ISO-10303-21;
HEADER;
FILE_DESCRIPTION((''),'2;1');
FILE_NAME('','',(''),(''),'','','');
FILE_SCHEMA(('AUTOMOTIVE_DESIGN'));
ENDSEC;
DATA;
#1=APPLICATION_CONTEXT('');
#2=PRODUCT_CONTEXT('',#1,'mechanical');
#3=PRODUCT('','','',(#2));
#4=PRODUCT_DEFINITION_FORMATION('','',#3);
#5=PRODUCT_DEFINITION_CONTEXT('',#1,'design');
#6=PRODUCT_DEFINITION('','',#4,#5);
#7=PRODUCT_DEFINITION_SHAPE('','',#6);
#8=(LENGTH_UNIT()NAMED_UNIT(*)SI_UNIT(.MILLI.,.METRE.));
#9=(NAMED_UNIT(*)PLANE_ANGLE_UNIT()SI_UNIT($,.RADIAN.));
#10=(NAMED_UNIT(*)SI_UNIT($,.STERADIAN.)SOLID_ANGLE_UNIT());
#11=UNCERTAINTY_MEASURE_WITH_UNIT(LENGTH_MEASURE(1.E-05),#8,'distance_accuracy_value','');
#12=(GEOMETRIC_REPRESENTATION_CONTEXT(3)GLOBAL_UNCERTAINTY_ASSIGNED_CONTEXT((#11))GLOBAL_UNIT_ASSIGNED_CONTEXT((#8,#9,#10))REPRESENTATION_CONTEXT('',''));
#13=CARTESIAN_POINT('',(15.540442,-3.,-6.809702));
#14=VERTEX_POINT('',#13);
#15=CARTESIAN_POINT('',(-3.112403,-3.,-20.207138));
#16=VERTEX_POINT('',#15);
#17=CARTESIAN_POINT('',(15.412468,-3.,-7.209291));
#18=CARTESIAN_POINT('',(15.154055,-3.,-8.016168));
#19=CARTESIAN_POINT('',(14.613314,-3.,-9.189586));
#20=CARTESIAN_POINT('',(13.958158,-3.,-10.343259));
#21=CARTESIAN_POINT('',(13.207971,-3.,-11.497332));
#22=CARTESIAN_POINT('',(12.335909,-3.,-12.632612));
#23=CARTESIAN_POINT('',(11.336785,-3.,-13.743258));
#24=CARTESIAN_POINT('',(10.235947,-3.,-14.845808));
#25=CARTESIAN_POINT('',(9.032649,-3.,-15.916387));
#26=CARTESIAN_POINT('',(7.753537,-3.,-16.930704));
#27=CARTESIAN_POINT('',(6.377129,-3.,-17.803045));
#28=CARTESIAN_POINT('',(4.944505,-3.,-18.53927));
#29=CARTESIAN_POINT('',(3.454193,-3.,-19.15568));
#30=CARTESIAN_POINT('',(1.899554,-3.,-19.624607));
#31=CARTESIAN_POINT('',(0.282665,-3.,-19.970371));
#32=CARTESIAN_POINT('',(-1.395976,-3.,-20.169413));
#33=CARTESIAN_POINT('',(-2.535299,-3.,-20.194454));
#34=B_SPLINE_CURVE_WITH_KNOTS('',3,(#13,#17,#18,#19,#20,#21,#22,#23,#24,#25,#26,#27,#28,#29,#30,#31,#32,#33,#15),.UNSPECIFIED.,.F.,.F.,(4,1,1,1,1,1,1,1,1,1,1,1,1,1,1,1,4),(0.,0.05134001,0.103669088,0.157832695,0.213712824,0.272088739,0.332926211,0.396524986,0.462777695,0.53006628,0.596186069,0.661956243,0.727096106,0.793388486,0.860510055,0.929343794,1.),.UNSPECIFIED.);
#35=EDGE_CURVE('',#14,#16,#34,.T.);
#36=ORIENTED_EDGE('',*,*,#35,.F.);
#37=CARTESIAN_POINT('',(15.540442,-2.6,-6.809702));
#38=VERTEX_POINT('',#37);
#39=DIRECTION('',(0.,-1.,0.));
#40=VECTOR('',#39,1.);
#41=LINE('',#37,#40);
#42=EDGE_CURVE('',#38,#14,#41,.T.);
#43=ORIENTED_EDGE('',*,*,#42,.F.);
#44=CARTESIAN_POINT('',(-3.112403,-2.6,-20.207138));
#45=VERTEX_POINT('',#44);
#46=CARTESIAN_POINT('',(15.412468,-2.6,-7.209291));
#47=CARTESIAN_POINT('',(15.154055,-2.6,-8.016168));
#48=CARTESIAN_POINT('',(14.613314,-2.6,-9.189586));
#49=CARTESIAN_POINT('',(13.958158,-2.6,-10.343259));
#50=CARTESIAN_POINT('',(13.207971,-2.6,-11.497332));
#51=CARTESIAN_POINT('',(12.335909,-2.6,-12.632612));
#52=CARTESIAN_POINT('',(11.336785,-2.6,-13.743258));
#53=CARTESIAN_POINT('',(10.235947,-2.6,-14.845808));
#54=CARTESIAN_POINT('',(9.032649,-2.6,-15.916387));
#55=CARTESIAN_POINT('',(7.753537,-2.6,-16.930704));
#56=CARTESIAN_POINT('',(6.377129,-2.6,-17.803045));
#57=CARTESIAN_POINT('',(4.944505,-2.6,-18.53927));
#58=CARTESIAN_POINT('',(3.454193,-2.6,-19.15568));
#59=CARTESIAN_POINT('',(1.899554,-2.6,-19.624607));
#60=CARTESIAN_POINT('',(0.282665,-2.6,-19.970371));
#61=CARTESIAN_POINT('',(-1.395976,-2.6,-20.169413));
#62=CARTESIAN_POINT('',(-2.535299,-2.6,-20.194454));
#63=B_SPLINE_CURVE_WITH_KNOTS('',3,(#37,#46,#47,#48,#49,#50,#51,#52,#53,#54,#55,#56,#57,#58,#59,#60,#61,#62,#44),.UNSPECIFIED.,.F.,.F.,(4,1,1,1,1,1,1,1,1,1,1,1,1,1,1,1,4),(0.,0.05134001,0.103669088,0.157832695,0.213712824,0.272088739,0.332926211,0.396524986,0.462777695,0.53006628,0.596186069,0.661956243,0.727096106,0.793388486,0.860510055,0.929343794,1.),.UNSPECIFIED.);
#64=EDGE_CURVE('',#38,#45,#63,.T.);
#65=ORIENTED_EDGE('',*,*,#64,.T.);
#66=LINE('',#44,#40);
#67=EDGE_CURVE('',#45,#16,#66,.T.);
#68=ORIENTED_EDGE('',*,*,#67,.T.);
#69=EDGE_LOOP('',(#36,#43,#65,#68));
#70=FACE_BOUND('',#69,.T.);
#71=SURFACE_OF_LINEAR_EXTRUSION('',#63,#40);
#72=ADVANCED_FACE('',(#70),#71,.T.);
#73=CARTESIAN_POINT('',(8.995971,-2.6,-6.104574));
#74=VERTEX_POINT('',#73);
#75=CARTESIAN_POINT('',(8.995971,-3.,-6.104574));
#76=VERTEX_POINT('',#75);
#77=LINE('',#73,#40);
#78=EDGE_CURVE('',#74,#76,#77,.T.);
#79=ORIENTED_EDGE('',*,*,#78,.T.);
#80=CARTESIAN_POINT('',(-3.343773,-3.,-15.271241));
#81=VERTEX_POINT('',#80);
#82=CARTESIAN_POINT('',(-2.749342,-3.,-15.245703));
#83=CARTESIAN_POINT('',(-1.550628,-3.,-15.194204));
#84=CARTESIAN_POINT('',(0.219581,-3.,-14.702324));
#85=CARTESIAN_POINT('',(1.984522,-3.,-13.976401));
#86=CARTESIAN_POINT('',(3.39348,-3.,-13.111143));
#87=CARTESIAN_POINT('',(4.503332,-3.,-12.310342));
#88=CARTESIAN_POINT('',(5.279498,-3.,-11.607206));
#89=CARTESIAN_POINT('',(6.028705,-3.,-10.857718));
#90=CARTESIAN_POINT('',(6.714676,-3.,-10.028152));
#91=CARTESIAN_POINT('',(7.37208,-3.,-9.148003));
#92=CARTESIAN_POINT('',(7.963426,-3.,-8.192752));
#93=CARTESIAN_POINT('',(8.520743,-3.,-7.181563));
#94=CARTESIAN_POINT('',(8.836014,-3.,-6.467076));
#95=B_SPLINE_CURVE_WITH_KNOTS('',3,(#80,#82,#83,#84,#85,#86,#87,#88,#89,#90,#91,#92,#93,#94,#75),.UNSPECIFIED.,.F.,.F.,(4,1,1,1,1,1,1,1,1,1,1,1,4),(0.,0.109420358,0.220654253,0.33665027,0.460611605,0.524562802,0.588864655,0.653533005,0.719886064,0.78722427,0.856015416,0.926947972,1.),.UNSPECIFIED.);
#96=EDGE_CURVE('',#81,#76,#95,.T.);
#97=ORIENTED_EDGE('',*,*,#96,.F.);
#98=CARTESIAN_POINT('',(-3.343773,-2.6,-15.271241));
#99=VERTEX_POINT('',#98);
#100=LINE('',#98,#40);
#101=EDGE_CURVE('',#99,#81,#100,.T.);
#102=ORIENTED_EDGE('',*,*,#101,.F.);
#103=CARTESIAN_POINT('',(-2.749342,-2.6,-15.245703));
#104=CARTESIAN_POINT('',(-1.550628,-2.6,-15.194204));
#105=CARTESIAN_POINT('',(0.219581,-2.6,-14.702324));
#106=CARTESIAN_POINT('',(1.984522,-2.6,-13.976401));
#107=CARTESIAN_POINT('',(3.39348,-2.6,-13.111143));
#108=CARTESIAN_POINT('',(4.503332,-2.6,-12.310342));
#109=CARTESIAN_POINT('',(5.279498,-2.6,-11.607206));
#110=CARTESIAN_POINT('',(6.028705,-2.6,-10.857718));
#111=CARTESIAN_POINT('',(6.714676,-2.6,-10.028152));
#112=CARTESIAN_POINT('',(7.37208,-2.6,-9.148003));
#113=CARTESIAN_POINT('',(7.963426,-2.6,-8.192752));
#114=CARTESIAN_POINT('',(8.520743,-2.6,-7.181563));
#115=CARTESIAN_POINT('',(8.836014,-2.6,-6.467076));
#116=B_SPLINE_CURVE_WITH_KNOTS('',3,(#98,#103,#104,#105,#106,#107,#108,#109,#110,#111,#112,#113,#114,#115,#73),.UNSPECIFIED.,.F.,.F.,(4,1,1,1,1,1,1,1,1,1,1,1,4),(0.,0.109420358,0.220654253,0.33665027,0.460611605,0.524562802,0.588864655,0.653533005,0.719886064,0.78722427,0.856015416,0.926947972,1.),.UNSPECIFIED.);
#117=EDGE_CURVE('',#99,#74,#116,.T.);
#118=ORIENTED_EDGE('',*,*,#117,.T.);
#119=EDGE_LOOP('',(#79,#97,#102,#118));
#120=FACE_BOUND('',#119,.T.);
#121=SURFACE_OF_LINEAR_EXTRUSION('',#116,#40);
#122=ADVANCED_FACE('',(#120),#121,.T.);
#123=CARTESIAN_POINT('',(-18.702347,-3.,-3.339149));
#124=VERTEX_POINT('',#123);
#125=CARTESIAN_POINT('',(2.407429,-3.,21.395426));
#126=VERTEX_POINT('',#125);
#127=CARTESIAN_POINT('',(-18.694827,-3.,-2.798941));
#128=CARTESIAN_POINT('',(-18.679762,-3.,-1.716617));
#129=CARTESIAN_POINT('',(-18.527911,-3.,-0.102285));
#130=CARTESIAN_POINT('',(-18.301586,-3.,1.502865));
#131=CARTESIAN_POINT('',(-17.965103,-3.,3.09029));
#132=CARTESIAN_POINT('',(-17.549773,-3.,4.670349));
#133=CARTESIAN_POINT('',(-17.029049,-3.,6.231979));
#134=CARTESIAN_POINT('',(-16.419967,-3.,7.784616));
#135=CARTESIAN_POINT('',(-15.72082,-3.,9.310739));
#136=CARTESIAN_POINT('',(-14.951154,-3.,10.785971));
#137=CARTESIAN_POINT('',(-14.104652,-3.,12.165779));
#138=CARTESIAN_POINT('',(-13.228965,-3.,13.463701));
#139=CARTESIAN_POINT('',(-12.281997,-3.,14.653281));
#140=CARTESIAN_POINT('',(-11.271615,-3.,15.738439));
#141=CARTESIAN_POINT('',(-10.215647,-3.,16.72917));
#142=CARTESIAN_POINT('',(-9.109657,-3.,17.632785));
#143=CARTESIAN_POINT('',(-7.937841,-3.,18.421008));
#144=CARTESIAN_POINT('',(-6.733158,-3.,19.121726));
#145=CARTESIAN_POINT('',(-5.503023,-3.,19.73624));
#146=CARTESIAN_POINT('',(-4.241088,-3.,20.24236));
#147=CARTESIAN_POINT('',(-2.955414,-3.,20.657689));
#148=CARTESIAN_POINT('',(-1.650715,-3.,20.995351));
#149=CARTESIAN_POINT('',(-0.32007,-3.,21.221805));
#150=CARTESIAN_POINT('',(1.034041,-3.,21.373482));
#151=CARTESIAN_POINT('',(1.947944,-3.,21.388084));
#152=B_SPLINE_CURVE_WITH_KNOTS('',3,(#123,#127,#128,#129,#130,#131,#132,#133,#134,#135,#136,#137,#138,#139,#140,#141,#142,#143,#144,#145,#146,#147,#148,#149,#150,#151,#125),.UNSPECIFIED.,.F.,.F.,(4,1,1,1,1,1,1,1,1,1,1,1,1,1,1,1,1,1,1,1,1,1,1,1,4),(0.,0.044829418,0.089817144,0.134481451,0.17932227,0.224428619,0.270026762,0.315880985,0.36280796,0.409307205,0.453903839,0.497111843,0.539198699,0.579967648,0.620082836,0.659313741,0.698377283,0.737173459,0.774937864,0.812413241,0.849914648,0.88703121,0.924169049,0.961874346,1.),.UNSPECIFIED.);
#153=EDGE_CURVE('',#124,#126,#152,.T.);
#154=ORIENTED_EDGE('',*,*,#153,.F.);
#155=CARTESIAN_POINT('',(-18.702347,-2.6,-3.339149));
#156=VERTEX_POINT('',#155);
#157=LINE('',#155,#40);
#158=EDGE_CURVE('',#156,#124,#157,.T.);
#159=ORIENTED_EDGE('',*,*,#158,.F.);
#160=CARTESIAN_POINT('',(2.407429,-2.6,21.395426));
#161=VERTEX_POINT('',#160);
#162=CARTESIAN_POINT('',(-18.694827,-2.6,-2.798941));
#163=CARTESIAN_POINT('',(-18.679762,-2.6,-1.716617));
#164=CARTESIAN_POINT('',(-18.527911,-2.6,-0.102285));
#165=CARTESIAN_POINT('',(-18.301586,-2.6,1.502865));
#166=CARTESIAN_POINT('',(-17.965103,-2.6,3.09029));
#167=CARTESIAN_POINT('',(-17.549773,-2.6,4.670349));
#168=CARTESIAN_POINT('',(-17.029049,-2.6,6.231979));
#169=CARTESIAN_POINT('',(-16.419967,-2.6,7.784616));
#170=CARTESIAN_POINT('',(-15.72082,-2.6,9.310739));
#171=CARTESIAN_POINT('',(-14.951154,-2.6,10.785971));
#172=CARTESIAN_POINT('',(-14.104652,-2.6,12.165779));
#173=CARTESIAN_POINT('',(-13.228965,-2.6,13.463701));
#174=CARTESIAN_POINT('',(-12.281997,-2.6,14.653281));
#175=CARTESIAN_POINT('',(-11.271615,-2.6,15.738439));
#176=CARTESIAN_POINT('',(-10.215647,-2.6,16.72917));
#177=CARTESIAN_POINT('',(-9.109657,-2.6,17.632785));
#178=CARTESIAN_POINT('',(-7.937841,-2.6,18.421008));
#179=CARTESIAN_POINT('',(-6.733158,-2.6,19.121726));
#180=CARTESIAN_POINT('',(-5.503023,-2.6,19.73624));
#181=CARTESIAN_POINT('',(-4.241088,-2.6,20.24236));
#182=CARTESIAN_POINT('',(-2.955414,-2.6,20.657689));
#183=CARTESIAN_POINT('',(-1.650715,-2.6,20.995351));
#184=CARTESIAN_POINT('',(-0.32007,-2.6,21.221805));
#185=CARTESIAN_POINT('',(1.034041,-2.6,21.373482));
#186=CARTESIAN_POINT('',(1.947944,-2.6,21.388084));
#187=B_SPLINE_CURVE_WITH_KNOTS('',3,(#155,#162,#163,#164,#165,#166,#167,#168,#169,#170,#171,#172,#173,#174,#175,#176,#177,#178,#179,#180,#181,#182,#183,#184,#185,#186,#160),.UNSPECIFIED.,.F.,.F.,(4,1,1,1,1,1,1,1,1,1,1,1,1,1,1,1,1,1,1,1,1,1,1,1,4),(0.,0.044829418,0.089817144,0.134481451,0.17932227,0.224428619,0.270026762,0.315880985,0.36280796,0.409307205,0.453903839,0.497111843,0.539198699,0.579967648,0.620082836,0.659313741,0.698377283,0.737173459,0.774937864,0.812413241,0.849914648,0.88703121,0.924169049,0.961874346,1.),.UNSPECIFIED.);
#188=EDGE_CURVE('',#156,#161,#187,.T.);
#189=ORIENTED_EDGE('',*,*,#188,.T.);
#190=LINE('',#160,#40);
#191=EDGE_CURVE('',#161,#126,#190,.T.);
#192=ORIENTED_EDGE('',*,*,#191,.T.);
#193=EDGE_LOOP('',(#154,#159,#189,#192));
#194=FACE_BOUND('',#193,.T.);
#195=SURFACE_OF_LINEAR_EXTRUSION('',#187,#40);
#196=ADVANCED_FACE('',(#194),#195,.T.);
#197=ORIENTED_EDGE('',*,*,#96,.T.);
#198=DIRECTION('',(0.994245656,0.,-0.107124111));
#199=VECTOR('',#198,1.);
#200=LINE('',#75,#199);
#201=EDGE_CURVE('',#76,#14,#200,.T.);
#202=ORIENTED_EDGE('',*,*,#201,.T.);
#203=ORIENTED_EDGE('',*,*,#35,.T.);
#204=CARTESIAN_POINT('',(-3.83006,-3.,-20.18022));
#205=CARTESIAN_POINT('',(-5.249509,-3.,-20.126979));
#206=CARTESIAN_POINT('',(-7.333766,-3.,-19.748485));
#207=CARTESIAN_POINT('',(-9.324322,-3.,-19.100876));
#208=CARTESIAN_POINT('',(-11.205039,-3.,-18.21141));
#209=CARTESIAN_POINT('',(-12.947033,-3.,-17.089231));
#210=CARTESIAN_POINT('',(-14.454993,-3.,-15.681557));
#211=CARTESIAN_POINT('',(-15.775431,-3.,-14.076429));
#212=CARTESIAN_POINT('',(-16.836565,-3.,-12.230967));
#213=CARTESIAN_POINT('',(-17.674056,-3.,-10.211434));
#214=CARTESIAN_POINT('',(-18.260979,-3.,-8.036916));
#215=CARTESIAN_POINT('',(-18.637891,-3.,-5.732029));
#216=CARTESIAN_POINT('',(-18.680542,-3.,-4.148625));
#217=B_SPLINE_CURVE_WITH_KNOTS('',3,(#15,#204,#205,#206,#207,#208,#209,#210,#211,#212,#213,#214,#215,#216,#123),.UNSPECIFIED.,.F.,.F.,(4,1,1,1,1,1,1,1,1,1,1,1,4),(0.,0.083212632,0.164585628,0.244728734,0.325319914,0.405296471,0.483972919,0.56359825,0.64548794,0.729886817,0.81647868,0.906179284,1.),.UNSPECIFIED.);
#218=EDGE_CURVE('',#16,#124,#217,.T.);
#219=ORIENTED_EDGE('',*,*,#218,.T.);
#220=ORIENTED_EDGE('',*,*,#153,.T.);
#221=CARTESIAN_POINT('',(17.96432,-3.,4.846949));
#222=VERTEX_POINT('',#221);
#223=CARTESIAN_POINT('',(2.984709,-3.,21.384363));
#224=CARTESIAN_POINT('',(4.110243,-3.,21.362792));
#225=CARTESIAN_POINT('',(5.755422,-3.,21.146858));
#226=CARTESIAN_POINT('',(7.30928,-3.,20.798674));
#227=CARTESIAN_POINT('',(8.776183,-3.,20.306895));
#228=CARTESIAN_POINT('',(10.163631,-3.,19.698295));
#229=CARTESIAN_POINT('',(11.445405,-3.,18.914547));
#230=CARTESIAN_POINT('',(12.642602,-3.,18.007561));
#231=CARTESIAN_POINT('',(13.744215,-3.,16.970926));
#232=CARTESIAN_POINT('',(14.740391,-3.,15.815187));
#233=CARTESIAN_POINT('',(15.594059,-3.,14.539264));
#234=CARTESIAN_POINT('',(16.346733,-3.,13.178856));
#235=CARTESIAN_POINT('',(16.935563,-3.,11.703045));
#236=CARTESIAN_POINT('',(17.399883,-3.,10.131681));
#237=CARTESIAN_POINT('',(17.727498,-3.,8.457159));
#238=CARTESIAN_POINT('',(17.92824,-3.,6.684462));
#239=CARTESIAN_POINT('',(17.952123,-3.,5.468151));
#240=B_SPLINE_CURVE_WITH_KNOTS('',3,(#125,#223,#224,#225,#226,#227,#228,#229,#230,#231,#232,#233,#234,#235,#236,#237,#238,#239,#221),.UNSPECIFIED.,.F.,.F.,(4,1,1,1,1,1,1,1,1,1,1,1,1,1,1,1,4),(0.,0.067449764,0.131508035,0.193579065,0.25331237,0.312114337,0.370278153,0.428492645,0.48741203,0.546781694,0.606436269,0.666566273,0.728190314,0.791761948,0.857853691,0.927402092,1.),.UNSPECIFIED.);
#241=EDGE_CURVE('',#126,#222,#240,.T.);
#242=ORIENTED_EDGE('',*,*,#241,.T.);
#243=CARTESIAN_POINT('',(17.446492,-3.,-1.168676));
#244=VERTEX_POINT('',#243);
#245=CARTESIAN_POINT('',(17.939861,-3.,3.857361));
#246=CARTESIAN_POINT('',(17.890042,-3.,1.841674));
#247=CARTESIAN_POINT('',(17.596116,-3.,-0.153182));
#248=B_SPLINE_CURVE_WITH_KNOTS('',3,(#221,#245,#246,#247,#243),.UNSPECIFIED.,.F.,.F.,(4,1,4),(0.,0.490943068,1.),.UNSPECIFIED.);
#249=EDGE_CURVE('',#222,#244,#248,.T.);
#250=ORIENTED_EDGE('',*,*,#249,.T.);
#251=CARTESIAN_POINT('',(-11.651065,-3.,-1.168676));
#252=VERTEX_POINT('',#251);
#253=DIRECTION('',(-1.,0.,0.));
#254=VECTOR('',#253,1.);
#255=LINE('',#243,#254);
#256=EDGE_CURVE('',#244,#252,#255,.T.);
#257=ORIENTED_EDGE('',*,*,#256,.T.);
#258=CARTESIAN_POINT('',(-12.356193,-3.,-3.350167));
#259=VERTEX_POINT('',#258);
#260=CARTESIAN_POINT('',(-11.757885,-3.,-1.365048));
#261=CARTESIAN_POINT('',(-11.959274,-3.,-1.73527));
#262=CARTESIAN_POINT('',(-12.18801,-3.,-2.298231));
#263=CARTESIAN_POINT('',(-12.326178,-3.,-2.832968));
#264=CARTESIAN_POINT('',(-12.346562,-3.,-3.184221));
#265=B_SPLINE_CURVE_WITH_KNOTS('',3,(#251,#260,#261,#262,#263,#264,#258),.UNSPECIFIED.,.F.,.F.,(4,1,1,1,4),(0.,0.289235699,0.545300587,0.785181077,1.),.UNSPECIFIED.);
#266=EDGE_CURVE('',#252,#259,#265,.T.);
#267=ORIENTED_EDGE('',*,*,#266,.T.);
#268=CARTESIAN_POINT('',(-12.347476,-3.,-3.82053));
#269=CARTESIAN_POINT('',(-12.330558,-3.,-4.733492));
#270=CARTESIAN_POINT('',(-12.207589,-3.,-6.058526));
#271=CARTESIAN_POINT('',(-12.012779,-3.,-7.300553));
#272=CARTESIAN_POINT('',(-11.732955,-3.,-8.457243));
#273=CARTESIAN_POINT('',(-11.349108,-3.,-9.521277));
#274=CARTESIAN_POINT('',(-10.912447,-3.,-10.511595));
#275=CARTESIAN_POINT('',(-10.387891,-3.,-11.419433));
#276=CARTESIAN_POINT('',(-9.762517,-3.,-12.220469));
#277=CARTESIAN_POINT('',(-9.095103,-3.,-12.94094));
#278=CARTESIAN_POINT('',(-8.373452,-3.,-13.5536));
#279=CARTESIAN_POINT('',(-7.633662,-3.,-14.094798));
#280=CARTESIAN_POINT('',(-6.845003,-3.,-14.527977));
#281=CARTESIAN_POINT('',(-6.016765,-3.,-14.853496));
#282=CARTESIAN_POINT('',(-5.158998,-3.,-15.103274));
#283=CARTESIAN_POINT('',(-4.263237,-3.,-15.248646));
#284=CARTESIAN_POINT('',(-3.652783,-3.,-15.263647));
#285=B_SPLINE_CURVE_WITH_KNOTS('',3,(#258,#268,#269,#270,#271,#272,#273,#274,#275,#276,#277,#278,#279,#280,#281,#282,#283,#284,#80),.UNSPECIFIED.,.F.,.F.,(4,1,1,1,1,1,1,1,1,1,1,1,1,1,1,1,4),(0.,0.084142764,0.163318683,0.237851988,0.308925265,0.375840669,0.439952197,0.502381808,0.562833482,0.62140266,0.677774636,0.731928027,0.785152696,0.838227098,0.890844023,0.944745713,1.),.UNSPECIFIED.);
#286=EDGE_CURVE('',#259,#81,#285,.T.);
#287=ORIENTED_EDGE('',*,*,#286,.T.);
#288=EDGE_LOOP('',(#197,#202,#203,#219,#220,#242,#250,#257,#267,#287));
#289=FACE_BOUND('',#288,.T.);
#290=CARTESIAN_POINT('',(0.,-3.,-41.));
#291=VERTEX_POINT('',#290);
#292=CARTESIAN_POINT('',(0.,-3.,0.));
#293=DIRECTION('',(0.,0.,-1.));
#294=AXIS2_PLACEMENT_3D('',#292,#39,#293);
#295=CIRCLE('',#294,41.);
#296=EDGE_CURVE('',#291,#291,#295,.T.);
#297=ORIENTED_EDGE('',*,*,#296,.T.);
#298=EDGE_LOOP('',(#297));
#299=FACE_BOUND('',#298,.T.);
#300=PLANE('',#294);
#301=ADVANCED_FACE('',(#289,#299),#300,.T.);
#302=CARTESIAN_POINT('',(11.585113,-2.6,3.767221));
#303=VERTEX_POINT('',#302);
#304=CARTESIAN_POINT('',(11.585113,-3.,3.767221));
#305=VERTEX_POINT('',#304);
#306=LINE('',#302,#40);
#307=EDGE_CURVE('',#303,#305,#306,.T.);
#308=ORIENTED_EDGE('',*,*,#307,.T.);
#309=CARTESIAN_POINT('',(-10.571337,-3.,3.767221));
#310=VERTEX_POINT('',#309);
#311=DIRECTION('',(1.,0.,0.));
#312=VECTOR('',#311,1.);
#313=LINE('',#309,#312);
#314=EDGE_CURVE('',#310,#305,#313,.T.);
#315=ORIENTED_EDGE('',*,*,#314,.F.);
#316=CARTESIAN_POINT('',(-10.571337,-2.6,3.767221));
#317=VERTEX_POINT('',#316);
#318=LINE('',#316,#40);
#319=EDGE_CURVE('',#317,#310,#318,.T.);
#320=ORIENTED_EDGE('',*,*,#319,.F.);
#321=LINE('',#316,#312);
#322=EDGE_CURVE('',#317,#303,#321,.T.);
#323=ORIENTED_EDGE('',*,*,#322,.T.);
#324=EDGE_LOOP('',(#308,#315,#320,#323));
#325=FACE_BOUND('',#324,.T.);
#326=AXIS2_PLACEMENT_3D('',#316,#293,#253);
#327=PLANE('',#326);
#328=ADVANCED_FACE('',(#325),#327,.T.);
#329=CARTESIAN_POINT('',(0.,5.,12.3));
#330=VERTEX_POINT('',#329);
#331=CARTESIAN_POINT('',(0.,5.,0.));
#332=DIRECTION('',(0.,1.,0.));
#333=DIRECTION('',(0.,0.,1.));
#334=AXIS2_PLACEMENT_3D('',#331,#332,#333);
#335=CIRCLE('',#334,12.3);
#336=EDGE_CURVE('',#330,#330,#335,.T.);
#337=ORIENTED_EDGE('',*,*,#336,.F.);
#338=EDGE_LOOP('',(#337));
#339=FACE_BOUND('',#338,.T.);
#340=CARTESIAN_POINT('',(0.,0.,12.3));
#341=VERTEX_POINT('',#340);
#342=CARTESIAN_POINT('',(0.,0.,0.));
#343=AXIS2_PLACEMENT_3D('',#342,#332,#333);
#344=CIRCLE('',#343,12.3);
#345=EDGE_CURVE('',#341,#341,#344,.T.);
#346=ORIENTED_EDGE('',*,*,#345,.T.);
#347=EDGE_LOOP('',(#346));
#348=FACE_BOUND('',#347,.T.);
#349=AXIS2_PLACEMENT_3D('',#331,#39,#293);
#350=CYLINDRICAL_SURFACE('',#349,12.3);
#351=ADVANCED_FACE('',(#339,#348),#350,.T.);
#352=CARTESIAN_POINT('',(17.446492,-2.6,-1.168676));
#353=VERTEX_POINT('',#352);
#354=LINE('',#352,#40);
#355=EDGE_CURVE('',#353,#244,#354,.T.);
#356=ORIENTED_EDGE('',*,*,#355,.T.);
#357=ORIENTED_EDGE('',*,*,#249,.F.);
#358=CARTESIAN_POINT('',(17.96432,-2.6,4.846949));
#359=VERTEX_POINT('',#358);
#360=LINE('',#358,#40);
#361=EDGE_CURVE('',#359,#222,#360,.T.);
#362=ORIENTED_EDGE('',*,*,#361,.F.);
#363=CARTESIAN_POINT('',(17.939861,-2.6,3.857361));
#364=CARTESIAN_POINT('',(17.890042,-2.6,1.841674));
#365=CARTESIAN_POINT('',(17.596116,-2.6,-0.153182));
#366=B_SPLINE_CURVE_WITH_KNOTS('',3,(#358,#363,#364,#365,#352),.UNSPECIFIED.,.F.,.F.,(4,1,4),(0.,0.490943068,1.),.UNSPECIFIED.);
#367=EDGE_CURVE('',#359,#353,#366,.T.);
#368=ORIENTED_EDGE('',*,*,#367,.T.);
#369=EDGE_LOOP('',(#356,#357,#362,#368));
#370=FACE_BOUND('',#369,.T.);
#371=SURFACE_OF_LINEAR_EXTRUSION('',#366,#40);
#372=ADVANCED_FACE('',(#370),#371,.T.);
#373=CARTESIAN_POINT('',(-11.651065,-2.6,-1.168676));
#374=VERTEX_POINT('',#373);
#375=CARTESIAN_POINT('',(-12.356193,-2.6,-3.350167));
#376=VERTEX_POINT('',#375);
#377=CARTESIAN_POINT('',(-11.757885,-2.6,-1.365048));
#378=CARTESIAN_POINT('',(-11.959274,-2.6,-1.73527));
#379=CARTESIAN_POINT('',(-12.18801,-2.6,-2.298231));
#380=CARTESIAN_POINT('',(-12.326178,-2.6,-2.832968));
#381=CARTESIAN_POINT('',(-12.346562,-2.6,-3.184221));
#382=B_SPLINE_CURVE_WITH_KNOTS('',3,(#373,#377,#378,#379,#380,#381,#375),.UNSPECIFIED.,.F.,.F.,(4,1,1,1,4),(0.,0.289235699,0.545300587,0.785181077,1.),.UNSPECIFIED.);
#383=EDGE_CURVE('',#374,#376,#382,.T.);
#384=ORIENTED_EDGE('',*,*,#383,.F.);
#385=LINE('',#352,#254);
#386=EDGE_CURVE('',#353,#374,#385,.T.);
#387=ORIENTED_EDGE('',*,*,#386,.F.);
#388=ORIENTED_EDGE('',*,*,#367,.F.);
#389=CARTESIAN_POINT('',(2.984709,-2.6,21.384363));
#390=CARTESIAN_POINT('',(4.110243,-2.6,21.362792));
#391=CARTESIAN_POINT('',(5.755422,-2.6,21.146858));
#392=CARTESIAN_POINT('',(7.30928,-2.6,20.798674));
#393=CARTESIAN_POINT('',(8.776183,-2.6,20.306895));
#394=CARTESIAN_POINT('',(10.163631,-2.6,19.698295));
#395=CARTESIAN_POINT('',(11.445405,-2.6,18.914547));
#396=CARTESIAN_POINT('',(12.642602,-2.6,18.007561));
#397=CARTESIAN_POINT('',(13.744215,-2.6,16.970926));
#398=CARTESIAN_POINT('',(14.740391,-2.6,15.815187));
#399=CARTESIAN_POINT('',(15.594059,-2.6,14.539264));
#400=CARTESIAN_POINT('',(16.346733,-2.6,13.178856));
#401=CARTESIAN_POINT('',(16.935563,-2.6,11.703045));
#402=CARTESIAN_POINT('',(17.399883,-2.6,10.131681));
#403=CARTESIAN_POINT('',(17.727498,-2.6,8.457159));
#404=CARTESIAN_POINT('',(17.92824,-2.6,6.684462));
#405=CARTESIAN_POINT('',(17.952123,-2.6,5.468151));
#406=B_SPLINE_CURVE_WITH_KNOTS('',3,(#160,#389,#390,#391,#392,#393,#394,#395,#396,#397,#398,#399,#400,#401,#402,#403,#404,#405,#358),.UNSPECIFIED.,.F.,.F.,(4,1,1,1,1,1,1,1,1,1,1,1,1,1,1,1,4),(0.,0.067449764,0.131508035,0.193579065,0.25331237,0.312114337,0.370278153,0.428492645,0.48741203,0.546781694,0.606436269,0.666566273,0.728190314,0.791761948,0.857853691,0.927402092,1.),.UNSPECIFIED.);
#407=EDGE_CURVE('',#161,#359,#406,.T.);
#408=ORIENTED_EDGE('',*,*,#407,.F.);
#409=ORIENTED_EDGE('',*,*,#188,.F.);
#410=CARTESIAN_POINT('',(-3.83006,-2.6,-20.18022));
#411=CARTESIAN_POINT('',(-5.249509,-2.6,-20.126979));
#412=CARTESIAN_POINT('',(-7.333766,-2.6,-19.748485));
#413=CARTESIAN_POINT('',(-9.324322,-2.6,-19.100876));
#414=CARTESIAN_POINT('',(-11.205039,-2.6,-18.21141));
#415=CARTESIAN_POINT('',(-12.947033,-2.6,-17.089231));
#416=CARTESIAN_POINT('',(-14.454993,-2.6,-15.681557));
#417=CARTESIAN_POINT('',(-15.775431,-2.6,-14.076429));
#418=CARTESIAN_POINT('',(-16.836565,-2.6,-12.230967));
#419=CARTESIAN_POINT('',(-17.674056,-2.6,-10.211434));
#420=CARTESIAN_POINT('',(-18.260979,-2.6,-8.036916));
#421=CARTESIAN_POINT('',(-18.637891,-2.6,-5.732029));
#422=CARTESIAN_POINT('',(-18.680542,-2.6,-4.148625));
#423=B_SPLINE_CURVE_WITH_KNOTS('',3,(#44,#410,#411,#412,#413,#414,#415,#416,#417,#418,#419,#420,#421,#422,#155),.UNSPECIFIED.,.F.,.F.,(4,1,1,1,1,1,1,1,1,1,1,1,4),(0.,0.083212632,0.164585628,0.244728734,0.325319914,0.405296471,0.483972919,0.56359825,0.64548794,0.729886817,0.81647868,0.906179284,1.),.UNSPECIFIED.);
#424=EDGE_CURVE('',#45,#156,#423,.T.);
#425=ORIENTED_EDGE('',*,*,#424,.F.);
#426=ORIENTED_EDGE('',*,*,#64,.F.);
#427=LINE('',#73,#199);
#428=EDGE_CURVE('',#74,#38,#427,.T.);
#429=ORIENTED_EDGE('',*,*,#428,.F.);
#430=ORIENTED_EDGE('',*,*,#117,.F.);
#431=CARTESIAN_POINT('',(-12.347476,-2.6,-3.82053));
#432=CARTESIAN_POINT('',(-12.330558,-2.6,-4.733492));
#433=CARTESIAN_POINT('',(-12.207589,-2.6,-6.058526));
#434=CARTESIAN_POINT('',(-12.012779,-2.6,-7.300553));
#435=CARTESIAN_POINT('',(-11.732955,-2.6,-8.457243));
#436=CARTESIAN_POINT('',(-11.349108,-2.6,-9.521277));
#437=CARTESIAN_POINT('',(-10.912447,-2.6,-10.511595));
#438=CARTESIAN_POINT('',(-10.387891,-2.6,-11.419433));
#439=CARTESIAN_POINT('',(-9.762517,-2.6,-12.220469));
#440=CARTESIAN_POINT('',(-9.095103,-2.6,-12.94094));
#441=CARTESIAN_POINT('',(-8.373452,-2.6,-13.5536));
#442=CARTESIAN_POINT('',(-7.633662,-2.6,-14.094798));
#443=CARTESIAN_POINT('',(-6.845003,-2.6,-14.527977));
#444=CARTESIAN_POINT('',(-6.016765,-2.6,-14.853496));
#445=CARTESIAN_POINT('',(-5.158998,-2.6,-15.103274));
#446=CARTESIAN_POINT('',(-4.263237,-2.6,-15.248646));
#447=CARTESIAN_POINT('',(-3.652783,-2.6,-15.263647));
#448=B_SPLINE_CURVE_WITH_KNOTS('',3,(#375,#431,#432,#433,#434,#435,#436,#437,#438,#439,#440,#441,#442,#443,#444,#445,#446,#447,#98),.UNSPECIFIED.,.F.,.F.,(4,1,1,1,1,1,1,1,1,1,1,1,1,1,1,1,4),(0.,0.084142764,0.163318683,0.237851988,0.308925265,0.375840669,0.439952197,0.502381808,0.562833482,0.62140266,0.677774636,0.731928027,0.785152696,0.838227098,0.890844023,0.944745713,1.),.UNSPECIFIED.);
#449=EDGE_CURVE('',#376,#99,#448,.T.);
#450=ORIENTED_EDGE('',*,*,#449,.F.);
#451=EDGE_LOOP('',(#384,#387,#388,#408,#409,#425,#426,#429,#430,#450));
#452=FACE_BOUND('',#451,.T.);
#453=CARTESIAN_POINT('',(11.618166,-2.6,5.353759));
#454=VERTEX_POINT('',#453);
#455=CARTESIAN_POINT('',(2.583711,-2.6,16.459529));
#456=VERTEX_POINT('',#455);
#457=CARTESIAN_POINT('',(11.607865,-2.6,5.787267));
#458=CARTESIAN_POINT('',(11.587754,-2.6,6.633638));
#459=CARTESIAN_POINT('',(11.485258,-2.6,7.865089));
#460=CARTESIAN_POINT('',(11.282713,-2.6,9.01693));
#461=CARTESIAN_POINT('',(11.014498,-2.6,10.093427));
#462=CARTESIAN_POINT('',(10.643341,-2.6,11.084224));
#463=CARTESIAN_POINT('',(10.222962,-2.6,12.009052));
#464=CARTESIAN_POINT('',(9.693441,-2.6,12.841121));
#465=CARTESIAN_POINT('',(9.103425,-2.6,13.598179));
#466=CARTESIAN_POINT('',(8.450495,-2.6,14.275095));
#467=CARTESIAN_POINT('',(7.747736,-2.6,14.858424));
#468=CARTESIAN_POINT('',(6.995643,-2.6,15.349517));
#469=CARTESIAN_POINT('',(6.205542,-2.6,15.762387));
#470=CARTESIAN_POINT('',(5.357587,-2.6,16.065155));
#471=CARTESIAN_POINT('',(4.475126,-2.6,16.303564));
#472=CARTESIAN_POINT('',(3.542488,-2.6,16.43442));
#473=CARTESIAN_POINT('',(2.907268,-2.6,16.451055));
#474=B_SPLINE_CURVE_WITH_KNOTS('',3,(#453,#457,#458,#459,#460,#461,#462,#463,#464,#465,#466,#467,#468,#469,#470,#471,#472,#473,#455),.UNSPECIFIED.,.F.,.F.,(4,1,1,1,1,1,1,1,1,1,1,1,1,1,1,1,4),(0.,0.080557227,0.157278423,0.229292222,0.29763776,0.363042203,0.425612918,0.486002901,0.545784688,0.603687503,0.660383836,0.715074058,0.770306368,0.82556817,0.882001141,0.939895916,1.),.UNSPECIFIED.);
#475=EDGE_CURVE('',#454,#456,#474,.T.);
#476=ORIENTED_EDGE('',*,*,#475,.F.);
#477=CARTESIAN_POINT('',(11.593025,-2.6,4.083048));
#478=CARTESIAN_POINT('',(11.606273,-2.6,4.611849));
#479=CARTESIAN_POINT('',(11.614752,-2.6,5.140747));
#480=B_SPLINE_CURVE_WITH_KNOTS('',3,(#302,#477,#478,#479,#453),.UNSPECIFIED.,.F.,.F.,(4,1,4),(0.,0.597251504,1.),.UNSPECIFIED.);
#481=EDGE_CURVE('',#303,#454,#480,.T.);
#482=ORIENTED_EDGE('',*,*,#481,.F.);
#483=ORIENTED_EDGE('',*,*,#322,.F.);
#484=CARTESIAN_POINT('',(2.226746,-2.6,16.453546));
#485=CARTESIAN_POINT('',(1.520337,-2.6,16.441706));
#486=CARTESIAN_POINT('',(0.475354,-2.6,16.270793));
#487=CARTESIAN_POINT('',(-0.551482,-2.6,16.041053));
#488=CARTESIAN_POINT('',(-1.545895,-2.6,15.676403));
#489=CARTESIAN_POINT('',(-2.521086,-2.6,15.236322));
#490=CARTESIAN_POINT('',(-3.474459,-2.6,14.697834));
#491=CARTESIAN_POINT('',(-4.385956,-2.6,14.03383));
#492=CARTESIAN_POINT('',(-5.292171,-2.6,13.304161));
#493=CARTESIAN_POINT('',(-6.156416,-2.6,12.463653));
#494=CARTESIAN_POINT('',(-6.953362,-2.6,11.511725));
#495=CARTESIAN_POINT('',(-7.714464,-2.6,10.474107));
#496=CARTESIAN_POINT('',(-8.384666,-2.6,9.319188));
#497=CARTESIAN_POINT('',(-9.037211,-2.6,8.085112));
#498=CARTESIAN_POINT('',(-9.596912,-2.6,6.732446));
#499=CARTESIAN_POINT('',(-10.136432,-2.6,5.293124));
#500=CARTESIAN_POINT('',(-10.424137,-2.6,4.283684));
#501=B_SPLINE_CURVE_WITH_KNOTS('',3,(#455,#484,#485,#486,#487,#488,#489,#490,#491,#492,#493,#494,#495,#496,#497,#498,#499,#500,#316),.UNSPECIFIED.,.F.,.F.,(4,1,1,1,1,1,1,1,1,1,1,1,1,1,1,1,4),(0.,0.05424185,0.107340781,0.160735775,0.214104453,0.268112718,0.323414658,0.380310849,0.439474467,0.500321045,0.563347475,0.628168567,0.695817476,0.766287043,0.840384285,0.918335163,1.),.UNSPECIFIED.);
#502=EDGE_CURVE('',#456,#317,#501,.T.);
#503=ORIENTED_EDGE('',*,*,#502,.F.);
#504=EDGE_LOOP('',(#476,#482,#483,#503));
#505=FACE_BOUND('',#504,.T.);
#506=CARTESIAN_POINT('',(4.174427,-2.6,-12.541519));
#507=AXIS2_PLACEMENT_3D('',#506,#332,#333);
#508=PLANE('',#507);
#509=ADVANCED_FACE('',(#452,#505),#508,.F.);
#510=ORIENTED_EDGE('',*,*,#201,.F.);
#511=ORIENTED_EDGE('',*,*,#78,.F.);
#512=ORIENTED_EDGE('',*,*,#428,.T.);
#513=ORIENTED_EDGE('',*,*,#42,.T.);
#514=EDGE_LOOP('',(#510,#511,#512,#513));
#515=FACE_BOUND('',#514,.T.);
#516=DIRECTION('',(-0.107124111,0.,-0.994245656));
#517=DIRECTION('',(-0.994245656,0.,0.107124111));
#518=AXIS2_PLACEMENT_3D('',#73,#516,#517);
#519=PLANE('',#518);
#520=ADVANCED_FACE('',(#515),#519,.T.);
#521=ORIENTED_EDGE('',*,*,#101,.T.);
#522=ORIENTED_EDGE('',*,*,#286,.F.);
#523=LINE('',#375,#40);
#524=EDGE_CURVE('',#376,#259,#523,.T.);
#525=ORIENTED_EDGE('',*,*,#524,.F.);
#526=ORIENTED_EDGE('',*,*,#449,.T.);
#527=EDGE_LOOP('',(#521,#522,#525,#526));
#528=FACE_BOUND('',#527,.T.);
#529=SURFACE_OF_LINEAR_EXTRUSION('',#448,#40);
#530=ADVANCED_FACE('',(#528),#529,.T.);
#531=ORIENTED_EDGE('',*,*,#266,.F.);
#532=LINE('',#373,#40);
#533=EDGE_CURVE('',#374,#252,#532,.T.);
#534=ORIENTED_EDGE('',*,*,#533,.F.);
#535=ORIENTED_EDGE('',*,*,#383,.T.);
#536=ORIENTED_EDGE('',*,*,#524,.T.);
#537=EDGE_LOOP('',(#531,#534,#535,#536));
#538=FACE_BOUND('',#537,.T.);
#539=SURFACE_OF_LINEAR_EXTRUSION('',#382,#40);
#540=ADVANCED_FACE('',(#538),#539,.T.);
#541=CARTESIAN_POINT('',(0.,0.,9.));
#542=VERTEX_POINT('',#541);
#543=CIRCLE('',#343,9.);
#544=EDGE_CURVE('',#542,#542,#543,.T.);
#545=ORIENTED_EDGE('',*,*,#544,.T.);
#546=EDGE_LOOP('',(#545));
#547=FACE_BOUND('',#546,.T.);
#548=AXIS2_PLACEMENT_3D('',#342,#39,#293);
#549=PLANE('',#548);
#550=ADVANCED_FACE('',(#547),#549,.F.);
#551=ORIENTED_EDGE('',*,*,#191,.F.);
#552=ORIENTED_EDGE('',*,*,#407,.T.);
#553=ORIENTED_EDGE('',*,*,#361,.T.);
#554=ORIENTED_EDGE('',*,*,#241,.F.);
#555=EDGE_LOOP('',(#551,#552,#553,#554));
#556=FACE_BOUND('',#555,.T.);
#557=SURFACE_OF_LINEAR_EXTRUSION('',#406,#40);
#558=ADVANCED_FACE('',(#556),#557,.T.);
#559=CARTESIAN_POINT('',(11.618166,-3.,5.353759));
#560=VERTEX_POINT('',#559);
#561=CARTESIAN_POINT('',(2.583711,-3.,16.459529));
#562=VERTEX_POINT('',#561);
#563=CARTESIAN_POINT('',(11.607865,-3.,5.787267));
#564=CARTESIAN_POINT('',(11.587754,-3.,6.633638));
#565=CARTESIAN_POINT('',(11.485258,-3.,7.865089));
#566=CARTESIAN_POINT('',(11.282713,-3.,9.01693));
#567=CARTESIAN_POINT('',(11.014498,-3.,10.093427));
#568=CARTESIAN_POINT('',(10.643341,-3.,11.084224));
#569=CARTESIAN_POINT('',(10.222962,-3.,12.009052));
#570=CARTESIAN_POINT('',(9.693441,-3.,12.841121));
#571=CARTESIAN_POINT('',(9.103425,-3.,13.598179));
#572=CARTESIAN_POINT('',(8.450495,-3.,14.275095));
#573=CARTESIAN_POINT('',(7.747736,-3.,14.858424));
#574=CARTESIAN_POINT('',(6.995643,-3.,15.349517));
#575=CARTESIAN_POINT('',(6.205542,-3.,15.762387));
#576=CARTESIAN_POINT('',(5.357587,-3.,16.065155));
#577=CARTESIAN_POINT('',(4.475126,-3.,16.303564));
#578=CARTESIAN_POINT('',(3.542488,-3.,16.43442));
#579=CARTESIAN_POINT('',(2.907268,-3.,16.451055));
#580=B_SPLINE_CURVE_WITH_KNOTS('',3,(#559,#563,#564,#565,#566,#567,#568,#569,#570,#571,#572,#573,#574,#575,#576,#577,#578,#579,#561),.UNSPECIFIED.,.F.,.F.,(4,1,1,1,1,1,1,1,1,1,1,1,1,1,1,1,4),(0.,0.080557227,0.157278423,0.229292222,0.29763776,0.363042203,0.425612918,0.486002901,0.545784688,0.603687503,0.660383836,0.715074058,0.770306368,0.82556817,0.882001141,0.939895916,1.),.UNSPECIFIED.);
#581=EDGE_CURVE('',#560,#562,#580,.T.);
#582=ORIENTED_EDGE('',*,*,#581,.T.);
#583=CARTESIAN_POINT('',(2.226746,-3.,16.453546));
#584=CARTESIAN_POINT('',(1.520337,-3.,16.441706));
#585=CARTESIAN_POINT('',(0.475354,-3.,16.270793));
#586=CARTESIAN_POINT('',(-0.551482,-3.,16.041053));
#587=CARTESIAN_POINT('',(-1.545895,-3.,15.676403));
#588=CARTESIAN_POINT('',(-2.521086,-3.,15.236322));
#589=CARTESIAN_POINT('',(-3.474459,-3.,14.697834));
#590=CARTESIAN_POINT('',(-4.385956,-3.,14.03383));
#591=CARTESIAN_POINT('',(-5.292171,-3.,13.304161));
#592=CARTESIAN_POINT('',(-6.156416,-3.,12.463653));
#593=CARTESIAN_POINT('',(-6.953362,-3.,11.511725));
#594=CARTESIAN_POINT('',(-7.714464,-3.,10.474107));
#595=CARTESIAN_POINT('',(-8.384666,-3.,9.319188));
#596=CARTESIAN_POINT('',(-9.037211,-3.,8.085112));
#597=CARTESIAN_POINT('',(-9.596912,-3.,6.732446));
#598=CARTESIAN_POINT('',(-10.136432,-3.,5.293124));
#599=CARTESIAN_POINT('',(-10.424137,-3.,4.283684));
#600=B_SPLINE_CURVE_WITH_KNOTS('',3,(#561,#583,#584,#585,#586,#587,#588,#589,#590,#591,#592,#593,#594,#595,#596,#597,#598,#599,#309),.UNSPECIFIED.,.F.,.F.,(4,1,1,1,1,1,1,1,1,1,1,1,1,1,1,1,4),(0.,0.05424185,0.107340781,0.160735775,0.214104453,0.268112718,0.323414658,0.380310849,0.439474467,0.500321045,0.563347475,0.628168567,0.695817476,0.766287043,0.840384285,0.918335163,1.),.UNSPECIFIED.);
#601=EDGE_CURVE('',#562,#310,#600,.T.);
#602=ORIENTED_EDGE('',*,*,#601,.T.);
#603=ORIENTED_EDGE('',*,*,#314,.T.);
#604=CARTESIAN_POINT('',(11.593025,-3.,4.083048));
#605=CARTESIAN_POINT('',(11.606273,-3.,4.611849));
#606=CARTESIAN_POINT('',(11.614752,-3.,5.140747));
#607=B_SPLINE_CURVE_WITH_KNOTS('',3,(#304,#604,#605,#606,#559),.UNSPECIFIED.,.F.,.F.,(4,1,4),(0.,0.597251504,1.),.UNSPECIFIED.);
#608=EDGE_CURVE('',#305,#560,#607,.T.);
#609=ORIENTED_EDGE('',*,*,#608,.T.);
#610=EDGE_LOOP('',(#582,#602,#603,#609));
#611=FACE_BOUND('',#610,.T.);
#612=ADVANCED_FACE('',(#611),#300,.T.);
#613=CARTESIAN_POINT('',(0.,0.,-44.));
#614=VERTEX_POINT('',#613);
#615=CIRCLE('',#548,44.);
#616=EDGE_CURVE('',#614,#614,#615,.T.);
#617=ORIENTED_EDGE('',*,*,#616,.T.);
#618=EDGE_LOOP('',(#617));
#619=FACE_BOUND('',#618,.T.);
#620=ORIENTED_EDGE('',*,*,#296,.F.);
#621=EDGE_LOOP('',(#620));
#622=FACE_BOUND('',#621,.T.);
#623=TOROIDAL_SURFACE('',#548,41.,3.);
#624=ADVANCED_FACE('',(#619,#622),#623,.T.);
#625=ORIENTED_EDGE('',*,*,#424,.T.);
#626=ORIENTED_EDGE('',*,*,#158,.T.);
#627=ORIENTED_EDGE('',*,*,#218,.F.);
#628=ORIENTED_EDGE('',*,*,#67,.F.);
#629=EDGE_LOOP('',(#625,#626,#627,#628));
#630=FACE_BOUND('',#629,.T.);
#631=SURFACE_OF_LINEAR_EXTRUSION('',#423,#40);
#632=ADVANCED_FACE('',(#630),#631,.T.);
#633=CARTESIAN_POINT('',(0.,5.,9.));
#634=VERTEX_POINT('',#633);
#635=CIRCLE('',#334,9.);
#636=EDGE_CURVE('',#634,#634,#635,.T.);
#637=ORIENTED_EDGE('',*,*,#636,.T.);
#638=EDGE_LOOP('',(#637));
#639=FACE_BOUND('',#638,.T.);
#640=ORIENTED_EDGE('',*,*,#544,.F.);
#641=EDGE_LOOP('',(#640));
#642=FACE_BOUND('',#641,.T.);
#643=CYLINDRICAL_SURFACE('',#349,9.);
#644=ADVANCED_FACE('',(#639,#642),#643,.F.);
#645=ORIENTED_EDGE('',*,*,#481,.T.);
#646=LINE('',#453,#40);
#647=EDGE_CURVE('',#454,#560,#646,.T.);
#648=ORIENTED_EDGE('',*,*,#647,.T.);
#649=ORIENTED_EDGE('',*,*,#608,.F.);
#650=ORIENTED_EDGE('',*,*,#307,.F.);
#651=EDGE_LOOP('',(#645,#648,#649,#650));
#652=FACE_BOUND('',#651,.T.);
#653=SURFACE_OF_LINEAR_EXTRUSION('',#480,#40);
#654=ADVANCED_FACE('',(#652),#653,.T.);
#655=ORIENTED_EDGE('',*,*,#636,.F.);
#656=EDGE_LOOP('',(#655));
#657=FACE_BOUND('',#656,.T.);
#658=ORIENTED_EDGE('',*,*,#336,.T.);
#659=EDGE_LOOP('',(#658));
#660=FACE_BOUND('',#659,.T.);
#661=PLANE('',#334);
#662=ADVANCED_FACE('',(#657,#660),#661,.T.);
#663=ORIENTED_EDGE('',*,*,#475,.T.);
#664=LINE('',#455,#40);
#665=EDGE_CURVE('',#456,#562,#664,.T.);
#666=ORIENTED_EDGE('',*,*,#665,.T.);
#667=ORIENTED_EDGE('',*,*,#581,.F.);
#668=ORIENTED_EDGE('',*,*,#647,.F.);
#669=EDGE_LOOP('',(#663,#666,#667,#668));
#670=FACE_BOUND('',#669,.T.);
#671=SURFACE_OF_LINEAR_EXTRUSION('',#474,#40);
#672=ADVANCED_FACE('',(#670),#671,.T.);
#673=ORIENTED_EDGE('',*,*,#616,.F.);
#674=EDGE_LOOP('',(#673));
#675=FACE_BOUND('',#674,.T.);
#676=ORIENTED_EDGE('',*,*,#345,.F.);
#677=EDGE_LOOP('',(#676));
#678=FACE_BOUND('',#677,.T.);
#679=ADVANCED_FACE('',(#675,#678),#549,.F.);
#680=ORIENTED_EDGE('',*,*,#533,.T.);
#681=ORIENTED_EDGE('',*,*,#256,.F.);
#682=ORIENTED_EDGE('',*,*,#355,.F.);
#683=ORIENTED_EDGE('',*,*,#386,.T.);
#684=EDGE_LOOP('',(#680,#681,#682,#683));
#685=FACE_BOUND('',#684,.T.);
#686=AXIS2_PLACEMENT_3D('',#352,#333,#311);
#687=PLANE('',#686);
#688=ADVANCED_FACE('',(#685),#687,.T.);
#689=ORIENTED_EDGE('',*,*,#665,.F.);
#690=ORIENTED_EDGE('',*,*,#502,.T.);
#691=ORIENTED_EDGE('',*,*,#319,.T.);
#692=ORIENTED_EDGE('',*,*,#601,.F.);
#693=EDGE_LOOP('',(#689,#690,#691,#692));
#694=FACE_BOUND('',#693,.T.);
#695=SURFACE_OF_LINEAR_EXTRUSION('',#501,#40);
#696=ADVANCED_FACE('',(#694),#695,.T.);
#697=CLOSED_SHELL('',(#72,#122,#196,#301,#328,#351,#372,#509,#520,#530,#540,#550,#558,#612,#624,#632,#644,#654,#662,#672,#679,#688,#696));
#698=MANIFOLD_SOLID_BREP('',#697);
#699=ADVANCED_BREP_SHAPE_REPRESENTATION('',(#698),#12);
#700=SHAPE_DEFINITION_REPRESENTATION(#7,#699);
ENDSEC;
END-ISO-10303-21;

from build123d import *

# Parameters (mm, degrees)
SKETCH_1_R          = 12.3
SKETCH_1_R_2        = 9
EXTRUDE_1_DEPTH     = 5
SKETCH_2_R          = 44
EXTRUDE_2_DEPTH     = 3
FILLET_1_R          = 3
CUT_EXTRUDE_1_DEPTH = 0.4


with BuildPart() as part:
    # Эскиз1 → Бобышка-Вытянуть1 (new body)
    with BuildSketch(Plane(origin=(0, 0, 0), x_dir=(1, 0, 0), z_dir=(0, 1, 0))):
        with Locations(Location((0, 0, 0), (0, 0, 270))):
            Circle(SKETCH_1_R)
        with Locations(Location((0, 0, 0), (0, 0, 270))):
            Circle(SKETCH_1_R_2, mode=Mode.SUBTRACT)
    extrude(amount=EXTRUDE_1_DEPTH)

    # Эскиз2 → Бобышка-Вытянуть2 (add)
    with BuildSketch(Plane.XZ):
        with Locations(Location((0, 0, 0), (0, 0, 270))):
            Circle(SKETCH_2_R)
    extrude(amount=EXTRUDE_2_DEPTH)

    # Скругление1
    fillet_1_edges = [part.edges().sort_by_distance(p)[0] for p in [
        (0, -3, 44),
    ]]
    fillet(fillet_1_edges, radius=FILLET_1_R - 0.0001)  # a hair under: the kernel refuses the full size

    # Эскиз3 → Вырез-Вытянуть1 (cut)
    with BuildSketch(Plane.XZ.offset(3)):
        with BuildLine():
            Line((8.995970712, -6.104573863), (15.540441866, -6.809702068))
            add(Edge.make_bspline(
                [(15.540441866, -6.809702068), (15.412468117, -7.209291312), (15.154055197, -8.016167909), (14.613314091, -9.189585554), (13.958158021, -10.343258865), (13.207970677, -11.497332402), (12.335909119, -12.632612277), (11.33678469, -13.743257832), (10.235946519, -14.845807978), (9.032648574, -15.91638665), (7.753536664, -16.930703687), (6.377129387, -17.80304501), (4.944504921, -18.539269968), (3.454192561, -19.15568009), (1.899553784, -19.624607238), (0.282665391, -19.970371161), (-1.395976393, -20.169412876), (-2.535298753, -20.19445388), (-3.112402685, -20.207137965)],
                knots=[0, 0, 0, 0, 0.821440156, 1.658705401, 2.525323128, 3.419405186, 4.353419828, 5.32681938, 6.344399772, 7.404443113, 8.481060479, 9.538977106, 10.591299887, 11.633537695, 12.694215778, 13.768160887, 14.869500701, 16, 16, 16, 16], degree=3))
            add(Edge.make_bspline(
                [(-3.112402685, -20.207137965), (-3.830059973, -20.180219947), (-5.24950882, -20.126979006), (-7.333765847, -19.748485297), (-9.324321869, -19.100876457), (-11.205038798, -18.21140963), (-12.947033456, -17.089230598), (-14.454993346, -15.681556769), (-15.775431133, -14.076428854), (-16.836564852, -12.230966933), (-17.674056128, -10.211434225), (-18.260978719, -8.036915844), (-18.637890858, -5.732029495), (-18.680542171, -4.148625261), (-18.702346595, -3.339149183)],
                knots=[0, 0, 0, 0, 0.998551589, 1.975027533, 2.936744805, 3.903838964, 4.863557655, 5.807675034, 6.763178998, 7.745855275, 8.758641806, 9.797744155, 10.874151411, 12, 12, 12, 12], degree=3))
            add(Edge.make_bspline(
                [(-18.702346595, -3.339149183), (-18.694827115, -2.798940969), (-18.679761602, -1.716616884), (-18.527910505, -0.102284621), (-18.301586091, 1.502865479), (-17.965102533, 3.090290283), (-17.549772791, 4.670349499), (-17.029049457, 6.231978524), (-16.419967141, 7.784615504), (-15.720819637, 9.310739002), (-14.951153945, 10.78597136), (-14.104651779, 12.165779349), (-13.228965259, 13.463701063), (-12.281997416, 14.653281312), (-11.271614555, 15.73843901), (-10.215647458, 16.72916995), (-9.109657465, 17.6327847), (-7.937840655, 18.421008283), (-6.733157575, 19.121726424), (-5.503022782, 19.73623986), (-4.241088179, 20.242359886), (-2.95541361, 20.657688994), (-1.650714865, 20.995350946), (-0.320069938, 21.221805432), (1.034040545, 21.37348169), (1.947944187, 21.388084339), (2.407429046, 21.395426137)],
                knots=[0, 0, 0, 0, 1.075906032, 2.155611451, 3.227554832, 4.30373447, 5.38628686, 6.480642286, 7.581143633, 8.707391042, 9.82337293, 10.893692135, 11.930684225, 12.940768785, 13.919223559, 14.881988069, 15.823529777, 16.761054785, 17.692163021, 18.598508727, 19.497917784, 20.397951545, 21.288749041, 22.180057169, 23.084984307, 24, 24, 24, 24], degree=3))
            add(Edge.make_bspline(
                [(2.407429046, 21.395426137), (2.984709253, 21.38436262), (4.110243009, 21.362791879), (5.755422445, 21.146858145), (7.309280074, 20.798674498), (8.776183147, 20.306894686), (10.163630571, 19.698295383), (11.445405048, 18.914546867), (12.642602428, 18.007561118), (13.744215102, 16.970925789), (14.740391422, 15.815186826), (15.5940589, 14.539264454), (16.346732625, 13.178856469), (16.935563309, 11.70304546), (17.399883233, 10.131680694), (17.72749797, 8.457159294), (17.928240109, 6.684462125), (17.952122631, 5.468151048), (17.964320071, 4.846948573)],
                knots=[0, 0, 0, 0, 1.079196217, 2.10412856, 3.097265039, 4.052997914, 4.993829394, 5.924450447, 6.855882321, 7.798592485, 8.748507102, 9.702980304, 10.665060364, 11.651045023, 12.668191174, 13.725659051, 14.838433479, 16, 16, 16, 16], degree=3))
            add(Edge.make_bspline(
                [(17.964320071, 4.846948573), (17.939861422, 3.857360897), (17.890041697, 1.84167366), (17.596116304, -0.153181552), (17.446491546, -1.168676427)],
                knots=[0, 0, 0, 0, 0.981886135, 2, 2, 2, 2], degree=3))
            Line((17.446491546, -1.168676427), (-11.651064544, -1.168676427))
            add(Edge.make_bspline(
                [(-11.651064544, -1.168676427), (-11.757884651, -1.36504795), (-11.95927427, -1.735270255), (-12.188010225, -2.298230913), (-12.326177646, -2.83296849), (-12.346562226, -3.184220667), (-12.356192749, -3.350166811)],
                knots=[0, 0, 0, 0, 1.156942796, 2.181202349, 3.140724307, 4, 4, 4, 4], degree=3))
            add(Edge.make_bspline(
                [(-12.356192749, -3.350166811), (-12.34747649, -3.820530136), (-12.330558483, -4.733491811), (-12.207588937, -6.058525833), (-12.012779093, -7.30055293), (-11.73295496, -8.457242596), (-11.349108398, -9.521277255), (-10.912446511, -10.511594722), (-10.387891199, -11.419433456), (-9.762517234, -12.22046917), (-9.095103061, -12.940939566), (-8.37345163, -13.553599554), (-7.633662355, -14.094798444), (-6.845003469, -14.527977227), (-6.01676525, -14.853496387), (-5.158998119, -15.10327405), (-4.2632374, -15.248645974), (-3.652782517, -15.263647049), (-3.343772877, -15.271240529)],
                knots=[0, 0, 0, 0, 1.346284225, 2.613098929, 3.805631801, 4.942804233, 6.013450698, 7.039235158, 8.038108926, 9.00533571, 9.942442562, 10.84439418, 11.710848438, 12.56244313, 13.41163356, 14.253504373, 15.115931414, 16, 16, 16, 16], degree=3))
            add(Edge.make_bspline(
                [(-3.343772877, -15.271240529), (-2.749342022, -15.245702869), (-1.550628193, -15.194204288), (0.219580647, -14.702324431), (1.984521743, -13.976401138), (3.39348022, -13.111143469), (4.503332391, -12.310342129), (5.279497704, -11.607205665), (6.028705195, -10.857717747), (6.714675872, -10.028152313), (7.372080008, -9.148002655), (7.963425509, -8.192752467), (8.520742644, -7.181562683), (8.836014409, -6.467075917), (8.995970712, -6.104573863)],
                knots=[0, 0, 0, 0, 1.313044299, 2.647851039, 4.03980324, 5.527339259, 6.29475363, 7.066375866, 7.842396062, 8.63863277, 9.446691243, 10.272184996, 11.123375662, 12, 12, 12, 12], degree=3))
        make_face()
        with BuildLine():
            Line((-10.57133698, 3.767221009), (11.585113341, 3.767221009))
            add(Edge.make_bspline(
                [(11.585113341, 3.767221009), (11.593025495, 4.083048202), (11.606273104, 4.611849202), (11.614751545, 5.140746771), (11.618166225, 5.353759471)],
                knots=[0, 0, 0, 0, 1.194503009, 2, 2, 2, 2], degree=3))
            add(Edge.make_bspline(
                [(11.618166225, 5.353759471), (11.607865414, 5.787266581), (11.587754302, 6.633637755), (11.485258286, 7.865088987), (11.282712763, 9.016930024), (11.014497534, 10.093427235), (10.643340787, 11.084224083), (10.22296171, 12.00905194), (9.693440715, 12.841121184), (9.10342503, 13.5981791), (8.450495006, 14.275095215), (7.747736216, 14.858424007), (6.995642953, 15.349517378), (6.205542288, 15.762387273), (5.357586525, 16.065155124), (4.475125766, 16.303564325), (3.542488324, 16.434420376), (2.907267946, 16.451055439), (2.583711097, 16.459528702)],
                knots=[0, 0, 0, 0, 1.288915635, 2.516454775, 3.668675548, 4.762204166, 5.808675246, 6.809806692, 7.776046417, 8.732555008, 9.659000055, 10.566141369, 11.441184925, 12.324901883, 13.209090714, 14.112018255, 15.038334656, 16, 16, 16, 16], degree=3))
            add(Edge.make_bspline(
                [(2.583711097, 16.459528702), (2.226745831, 16.453545839), (1.52033684, 16.441706179), (0.475354062, 16.270793025), (-0.551481717, 16.041052654), (-1.545895478, 15.676402937), (-2.521085999, 15.236321875), (-3.474458828, 14.69783397), (-4.385955956, 14.033830496), (-5.29217066, 13.304160782), (-6.156416477, 12.463653114), (-6.953362323, 11.511724736), (-7.714463763, 10.47410691), (-8.384666445, 9.319187587), (-9.037211223, 8.085112247), (-9.596912384, 6.732446378), (-10.136432386, 5.293123636), (-10.424137331, 4.283684469), (-10.57133698, 3.767221009)],
                knots=[0, 0, 0, 0, 0.867869597, 1.717452491, 2.571772394, 3.425671253, 4.289803496, 5.174634535, 6.084973587, 7.031591473, 8.005136717, 9.013559597, 10.050697067, 11.133079613, 12.260592687, 13.446148552, 14.693362615, 16, 16, 16, 16], degree=3))
        make_face(mode=Mode.SUBTRACT)
    extrude(amount=-CUT_EXTRUDE_1_DEPTH, mode=Mode.SUBTRACT)


solid = part.part
